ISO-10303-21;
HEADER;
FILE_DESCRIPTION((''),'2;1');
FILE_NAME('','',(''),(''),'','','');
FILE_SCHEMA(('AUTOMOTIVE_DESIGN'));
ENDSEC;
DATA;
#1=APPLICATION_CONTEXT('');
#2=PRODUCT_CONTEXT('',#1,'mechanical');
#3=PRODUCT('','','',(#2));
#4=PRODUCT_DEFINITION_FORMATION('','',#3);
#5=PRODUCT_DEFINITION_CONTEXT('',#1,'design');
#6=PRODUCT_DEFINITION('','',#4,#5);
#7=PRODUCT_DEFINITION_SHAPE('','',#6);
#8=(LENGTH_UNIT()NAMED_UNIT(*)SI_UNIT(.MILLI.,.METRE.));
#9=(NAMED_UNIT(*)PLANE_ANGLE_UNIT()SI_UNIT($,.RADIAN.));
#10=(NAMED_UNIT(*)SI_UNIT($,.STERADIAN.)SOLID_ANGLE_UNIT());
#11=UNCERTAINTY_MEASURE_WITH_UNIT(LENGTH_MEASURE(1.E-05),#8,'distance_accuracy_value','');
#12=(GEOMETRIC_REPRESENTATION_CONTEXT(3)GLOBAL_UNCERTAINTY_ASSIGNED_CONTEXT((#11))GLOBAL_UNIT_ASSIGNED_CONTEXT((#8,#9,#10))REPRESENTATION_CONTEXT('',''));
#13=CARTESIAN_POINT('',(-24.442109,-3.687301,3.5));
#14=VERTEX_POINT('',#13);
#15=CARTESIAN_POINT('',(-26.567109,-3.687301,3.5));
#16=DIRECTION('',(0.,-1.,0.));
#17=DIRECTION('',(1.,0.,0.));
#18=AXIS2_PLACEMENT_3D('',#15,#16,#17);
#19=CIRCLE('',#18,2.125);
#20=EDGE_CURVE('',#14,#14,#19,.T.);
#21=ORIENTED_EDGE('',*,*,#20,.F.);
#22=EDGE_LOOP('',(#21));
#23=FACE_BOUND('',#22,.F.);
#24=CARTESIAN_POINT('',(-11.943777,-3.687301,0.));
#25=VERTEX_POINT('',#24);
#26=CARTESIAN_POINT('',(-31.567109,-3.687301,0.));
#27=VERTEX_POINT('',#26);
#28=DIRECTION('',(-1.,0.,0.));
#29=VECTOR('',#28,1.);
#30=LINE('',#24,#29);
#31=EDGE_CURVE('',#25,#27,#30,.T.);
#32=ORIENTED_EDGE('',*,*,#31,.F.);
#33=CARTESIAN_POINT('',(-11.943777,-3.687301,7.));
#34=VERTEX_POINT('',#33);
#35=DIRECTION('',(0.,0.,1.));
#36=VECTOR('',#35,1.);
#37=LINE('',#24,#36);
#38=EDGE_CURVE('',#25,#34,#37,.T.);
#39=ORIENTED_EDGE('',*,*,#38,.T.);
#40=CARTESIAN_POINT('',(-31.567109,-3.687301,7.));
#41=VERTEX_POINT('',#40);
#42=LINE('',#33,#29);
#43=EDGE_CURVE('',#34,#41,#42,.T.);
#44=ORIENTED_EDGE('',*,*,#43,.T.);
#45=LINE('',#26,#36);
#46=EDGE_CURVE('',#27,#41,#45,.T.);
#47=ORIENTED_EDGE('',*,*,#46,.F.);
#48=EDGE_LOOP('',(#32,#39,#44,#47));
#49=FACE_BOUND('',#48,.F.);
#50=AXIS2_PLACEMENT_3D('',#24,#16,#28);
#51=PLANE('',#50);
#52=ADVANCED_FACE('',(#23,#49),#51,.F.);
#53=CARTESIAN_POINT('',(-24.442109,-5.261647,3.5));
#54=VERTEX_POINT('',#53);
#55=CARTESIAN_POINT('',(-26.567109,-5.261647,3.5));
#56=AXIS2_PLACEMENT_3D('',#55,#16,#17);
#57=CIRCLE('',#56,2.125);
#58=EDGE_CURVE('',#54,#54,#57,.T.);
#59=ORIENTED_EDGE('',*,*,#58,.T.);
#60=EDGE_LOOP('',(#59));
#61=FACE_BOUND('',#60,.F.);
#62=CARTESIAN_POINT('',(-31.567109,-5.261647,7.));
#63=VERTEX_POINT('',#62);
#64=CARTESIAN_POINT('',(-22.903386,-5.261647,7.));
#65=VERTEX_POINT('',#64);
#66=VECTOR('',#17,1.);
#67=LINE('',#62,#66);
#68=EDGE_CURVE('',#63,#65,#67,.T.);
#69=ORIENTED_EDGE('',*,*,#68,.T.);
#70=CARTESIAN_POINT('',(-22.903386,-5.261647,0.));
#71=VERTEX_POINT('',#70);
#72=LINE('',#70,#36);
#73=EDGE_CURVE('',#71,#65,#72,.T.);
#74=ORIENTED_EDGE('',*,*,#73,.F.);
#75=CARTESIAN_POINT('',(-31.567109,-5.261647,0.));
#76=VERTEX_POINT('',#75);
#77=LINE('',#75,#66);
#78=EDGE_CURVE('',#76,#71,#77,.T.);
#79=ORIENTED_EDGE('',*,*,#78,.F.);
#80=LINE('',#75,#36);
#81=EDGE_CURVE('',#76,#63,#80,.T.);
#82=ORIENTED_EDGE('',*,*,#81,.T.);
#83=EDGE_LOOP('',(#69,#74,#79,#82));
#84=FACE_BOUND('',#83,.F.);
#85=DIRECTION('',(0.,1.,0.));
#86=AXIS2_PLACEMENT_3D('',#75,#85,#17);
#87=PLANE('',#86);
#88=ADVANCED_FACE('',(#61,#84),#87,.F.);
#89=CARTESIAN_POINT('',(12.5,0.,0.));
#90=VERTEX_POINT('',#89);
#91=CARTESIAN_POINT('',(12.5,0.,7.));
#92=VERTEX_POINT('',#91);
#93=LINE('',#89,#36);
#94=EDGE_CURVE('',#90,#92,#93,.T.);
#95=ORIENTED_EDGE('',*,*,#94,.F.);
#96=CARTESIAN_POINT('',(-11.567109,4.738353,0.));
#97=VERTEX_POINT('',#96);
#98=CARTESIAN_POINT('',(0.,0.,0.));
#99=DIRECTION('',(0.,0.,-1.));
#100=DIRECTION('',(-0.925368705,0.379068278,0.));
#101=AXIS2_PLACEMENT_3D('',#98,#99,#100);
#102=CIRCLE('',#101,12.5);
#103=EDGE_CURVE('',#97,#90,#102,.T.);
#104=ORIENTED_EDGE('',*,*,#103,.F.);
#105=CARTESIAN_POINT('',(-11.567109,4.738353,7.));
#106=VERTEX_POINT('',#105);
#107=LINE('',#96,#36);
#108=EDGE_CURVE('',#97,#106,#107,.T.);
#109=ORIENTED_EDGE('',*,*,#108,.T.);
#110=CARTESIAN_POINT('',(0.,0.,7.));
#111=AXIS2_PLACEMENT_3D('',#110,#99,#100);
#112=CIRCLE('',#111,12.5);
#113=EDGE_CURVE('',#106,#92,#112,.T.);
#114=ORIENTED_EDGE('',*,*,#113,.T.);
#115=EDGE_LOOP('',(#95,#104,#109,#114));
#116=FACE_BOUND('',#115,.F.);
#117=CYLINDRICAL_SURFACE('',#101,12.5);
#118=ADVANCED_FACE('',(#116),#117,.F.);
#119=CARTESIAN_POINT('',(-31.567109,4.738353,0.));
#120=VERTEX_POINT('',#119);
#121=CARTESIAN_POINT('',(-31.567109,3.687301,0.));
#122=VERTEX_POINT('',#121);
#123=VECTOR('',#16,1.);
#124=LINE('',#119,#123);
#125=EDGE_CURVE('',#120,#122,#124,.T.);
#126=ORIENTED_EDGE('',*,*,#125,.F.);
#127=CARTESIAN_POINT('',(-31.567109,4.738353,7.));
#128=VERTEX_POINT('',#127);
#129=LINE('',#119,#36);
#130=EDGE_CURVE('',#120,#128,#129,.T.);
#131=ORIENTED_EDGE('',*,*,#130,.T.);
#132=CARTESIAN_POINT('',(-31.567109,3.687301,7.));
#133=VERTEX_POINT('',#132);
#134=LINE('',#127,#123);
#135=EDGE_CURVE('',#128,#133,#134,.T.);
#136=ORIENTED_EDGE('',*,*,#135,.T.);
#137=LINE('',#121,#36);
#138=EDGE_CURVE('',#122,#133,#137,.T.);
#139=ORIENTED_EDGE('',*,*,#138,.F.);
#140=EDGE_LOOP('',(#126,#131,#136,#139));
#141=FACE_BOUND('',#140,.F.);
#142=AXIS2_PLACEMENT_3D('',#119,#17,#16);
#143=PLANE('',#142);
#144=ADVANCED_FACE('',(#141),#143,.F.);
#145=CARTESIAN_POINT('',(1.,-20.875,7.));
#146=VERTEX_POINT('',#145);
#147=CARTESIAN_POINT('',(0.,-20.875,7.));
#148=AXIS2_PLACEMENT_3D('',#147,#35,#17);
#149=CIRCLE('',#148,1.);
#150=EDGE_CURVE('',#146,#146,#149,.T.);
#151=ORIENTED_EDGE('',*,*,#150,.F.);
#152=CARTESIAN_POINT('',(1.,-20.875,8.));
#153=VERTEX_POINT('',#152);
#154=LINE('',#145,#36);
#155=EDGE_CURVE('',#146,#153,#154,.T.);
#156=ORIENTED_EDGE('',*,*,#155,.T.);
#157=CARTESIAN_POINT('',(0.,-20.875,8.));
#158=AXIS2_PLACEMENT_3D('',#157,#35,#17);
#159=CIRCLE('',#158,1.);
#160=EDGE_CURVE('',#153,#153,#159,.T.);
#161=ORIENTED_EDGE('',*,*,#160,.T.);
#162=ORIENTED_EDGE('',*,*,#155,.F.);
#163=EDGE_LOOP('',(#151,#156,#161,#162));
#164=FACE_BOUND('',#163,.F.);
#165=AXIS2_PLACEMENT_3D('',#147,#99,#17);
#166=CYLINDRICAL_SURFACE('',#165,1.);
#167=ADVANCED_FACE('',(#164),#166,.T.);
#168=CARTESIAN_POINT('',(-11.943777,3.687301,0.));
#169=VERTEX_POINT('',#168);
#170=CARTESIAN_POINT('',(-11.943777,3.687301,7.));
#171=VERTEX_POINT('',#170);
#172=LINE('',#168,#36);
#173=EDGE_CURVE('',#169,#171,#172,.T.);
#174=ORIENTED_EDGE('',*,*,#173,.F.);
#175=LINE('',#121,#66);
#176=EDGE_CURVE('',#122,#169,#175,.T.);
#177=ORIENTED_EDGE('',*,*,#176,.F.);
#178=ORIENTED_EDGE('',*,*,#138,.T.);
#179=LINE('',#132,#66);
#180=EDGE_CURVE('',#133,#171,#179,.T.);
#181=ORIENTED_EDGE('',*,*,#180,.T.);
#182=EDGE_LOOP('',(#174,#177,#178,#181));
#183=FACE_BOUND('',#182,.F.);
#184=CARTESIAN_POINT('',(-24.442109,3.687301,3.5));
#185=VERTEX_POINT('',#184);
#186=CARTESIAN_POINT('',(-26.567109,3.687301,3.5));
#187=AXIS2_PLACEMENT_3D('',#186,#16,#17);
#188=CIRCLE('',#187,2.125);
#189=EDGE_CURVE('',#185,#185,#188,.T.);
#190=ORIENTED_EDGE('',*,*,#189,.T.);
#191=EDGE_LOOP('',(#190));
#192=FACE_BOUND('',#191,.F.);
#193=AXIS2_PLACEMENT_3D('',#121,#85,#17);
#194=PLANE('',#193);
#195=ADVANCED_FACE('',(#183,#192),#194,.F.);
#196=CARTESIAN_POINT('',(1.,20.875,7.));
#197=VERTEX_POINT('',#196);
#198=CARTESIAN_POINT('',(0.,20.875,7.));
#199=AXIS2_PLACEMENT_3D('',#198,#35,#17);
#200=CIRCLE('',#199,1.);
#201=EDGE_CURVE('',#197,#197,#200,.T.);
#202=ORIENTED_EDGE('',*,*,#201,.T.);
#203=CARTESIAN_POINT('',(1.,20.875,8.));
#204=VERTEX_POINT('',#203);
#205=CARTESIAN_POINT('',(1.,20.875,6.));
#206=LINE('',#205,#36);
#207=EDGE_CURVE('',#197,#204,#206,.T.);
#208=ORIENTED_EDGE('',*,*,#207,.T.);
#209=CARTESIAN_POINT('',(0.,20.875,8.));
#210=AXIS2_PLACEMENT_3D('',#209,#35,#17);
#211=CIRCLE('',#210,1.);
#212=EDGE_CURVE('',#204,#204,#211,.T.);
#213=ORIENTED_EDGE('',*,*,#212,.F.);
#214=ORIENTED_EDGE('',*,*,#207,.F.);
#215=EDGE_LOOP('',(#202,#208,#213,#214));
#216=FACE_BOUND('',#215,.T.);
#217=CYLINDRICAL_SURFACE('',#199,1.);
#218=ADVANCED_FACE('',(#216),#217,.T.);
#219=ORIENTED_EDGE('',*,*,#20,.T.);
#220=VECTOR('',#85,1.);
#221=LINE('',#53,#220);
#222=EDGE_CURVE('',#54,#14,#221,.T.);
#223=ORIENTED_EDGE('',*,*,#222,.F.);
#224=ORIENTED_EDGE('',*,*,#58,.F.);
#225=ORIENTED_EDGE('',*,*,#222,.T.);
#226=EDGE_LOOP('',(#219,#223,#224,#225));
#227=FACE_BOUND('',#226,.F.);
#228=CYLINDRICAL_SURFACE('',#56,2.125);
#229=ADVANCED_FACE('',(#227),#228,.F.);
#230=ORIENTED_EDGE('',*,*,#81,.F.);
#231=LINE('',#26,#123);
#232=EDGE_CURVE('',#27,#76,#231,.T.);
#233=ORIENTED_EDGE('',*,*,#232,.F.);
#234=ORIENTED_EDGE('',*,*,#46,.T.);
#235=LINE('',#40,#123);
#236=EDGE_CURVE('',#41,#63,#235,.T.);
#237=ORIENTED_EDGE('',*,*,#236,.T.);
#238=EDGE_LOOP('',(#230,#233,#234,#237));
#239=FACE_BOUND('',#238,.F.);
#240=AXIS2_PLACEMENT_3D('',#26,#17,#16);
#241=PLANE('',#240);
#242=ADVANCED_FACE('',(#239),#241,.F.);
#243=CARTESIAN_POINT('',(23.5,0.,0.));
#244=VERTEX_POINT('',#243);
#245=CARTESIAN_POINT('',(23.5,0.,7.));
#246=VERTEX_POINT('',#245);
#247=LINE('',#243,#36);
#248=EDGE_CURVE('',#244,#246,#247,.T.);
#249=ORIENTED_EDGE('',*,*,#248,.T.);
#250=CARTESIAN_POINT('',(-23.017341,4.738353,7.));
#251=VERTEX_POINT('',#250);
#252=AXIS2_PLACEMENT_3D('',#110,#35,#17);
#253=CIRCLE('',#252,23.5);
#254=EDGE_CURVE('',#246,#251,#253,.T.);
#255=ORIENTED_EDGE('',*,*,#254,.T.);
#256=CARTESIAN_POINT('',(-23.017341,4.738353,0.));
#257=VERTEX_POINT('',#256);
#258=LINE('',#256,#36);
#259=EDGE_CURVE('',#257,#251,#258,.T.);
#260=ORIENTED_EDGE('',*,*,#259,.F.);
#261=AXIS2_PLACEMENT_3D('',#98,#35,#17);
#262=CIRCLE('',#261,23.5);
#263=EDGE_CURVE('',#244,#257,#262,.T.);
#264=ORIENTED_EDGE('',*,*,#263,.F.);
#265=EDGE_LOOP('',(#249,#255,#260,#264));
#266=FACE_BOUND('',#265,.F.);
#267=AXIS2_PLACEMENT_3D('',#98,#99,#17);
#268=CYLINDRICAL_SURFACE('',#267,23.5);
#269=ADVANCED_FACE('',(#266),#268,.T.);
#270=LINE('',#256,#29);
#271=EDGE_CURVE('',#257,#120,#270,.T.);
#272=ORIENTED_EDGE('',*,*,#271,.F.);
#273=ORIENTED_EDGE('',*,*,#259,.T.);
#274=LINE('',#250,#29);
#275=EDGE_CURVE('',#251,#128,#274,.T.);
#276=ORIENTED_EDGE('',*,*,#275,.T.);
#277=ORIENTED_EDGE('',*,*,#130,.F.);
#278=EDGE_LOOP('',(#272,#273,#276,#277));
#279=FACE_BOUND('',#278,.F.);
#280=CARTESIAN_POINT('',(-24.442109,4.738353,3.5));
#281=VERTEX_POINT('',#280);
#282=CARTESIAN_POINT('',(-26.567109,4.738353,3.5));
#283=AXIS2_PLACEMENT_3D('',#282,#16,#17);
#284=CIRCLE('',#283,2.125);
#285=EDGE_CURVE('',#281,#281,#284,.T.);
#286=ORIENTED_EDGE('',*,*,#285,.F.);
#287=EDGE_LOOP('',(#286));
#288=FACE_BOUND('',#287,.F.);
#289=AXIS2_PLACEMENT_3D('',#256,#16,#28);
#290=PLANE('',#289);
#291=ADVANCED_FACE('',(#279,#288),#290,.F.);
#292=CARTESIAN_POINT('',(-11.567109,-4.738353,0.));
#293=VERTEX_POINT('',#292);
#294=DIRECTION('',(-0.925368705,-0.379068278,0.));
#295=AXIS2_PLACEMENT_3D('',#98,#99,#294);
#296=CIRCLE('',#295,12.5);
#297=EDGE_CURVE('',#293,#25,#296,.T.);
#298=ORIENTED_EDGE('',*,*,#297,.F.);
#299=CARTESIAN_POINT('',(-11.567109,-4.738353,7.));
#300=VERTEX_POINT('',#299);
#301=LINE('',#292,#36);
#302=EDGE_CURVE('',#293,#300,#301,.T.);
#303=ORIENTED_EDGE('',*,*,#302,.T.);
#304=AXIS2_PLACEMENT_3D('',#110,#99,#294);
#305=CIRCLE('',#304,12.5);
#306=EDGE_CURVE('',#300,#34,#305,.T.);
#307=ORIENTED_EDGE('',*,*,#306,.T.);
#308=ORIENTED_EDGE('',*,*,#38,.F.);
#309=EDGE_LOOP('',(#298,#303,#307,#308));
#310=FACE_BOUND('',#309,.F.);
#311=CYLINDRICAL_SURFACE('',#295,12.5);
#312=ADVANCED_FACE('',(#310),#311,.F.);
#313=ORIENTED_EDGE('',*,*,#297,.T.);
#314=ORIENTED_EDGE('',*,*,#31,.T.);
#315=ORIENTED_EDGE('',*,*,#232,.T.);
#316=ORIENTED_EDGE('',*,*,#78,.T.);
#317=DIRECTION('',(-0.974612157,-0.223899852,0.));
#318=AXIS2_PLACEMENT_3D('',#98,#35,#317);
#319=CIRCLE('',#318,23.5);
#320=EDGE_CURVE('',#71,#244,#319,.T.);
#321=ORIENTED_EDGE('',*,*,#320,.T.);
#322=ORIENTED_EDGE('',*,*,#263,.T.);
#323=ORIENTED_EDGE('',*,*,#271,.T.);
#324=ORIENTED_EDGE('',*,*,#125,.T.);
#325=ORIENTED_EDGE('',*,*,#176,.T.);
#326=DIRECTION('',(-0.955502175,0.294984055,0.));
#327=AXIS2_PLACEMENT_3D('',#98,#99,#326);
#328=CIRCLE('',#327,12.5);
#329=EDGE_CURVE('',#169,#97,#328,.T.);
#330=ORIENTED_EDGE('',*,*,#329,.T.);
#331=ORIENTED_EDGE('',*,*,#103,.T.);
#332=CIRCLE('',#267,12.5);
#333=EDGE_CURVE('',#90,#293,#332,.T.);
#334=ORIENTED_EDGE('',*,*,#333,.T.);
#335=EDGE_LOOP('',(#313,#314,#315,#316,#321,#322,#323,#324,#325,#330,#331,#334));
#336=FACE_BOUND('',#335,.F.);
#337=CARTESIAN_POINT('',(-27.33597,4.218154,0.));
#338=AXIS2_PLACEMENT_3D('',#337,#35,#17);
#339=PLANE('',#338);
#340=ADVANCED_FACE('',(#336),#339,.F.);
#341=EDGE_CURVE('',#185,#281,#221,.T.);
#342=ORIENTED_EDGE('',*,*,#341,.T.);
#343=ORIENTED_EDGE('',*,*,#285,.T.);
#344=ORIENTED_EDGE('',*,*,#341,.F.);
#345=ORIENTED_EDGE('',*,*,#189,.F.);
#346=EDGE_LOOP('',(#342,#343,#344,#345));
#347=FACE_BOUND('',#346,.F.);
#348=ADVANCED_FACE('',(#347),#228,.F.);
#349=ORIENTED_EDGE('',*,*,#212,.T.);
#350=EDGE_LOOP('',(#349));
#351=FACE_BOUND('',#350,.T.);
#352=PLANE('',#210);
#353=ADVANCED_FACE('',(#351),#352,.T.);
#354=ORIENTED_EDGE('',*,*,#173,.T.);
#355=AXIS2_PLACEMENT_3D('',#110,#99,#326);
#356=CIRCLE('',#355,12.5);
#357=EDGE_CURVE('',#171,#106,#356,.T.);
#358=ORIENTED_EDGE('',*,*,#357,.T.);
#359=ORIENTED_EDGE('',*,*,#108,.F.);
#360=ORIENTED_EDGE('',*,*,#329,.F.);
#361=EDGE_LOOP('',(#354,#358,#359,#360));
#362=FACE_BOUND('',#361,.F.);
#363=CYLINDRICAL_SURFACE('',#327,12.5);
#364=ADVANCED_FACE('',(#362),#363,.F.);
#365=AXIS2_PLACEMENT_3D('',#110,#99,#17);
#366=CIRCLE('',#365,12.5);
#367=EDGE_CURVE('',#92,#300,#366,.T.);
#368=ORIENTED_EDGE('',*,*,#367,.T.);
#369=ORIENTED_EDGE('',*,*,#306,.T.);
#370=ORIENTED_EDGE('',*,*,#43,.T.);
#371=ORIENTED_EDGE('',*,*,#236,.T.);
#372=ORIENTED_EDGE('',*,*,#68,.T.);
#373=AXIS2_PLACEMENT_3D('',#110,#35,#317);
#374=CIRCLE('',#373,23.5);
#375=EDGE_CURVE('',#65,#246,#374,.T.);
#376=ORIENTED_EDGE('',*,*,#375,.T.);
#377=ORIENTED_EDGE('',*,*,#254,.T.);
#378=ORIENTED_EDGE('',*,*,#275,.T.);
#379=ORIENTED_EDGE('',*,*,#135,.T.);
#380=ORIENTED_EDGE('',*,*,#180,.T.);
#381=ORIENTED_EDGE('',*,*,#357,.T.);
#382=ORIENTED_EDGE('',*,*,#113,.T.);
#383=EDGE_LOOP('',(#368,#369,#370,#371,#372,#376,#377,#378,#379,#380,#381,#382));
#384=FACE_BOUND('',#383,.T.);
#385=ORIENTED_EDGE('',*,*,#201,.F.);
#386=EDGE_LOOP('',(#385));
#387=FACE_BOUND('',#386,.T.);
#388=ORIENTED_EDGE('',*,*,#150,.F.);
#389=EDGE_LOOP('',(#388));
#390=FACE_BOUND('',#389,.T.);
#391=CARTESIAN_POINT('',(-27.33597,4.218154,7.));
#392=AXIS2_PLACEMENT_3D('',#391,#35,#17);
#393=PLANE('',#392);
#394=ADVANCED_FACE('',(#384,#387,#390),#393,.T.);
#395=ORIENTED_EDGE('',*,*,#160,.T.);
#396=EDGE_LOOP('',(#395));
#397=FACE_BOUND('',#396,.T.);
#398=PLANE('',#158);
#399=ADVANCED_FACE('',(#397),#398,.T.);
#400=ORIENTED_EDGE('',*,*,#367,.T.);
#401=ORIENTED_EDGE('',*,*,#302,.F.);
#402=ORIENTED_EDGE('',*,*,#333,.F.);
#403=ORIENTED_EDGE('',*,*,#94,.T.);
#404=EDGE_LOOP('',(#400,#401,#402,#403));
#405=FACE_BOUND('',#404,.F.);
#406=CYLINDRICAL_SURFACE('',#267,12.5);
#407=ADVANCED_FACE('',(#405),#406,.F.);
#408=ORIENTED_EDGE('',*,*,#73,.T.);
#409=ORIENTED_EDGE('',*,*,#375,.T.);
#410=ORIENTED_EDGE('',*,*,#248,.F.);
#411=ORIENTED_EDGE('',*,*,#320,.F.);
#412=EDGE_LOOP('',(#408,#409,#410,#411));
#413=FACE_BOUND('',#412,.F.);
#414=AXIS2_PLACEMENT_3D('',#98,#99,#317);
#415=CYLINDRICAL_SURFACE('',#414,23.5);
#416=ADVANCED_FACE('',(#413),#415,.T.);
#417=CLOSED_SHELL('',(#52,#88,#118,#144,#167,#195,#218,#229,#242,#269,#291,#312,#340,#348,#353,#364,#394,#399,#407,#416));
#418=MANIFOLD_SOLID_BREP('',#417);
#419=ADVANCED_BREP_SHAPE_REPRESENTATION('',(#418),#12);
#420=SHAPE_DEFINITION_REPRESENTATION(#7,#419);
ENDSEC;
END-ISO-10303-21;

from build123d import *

# Parameters (mm, degrees)
F1_DEPTH = 7
F2_R     = 2.125
F3_DEPTH = 10
F4_R     = 1
F5_DEPTH = 1


# Not quite as in the source:
# - a feature names something its author has since deleted; it is built from what else it names


with BuildPart() as f1:
    # F0 (on Top) → F1 (new body)
    with BuildSketch(Plane.XY):
        with BuildLine():
            ThreePointArc((-23.208916684, 3.6873006871), (-23.1191027664, 4.2139159074), (-23.017341427, 4.7383534726))
            Line((-23.017341427, 4.7383534726), (-31.5671088163, 4.7383534726))
            Line((-31.5671088163, 4.7383534726), (-31.5671088163, 3.6873006871))
            Line((-31.5671088163, 3.6873006871), (-23.208916684, 3.6873006871))
        make_face()
        with BuildLine():
            Line((-31.5671088163, -5.2616465274), (-22.9033856847, -5.2616465274))
            ThreePointArc((-22.9033856847, -5.2616465274), (-23.0695849256, -4.4770806738), (-23.208916684, -3.6873006871))
            Line((-23.208916684, -3.6873006871), (-31.5671088163, -3.6873006871))
            Line((-31.5671088163, -3.6873006871), (-31.5671088163, -5.2616465274))
        make_face()
        with BuildLine():
            ThreePointArc((-22.9033856847, -5.2616465274), (2.6476816661, -23.3503700569), (23.5, 0))
            ThreePointArc((23.5, 0), (2.3814361701, 23.3790239695), (-23.017341427, 4.7383534726))
            Line((-23.017341427, 4.7383534726), (-11.5671088163, 4.7383534726))
            ThreePointArc((-11.5671088163, 4.7383534726), (2.4146573045, 12.2645599229), (12.5, 0))
            ThreePointArc((12.5, 0), (2.4146573045, -12.2645599229), (-11.5671088163, -4.7383534726))
            Line((-11.5671088163, -4.7383534726), (-11.5671088163, -5.2616465274))
            Line((-11.5671088163, -5.2616465274), (-22.9033856847, -5.2616465274))
        make_face()
        with BuildLine():
            Line((-11.5671088163, 4.7383534726), (-23.017341427, 4.7383534726))
            ThreePointArc((-23.017341427, 4.7383534726), (-23.1191027664, 4.2139159074), (-23.208916684, 3.6873006871))
            Line((-23.208916684, 3.6873006871), (-11.9437771933, 3.6873006871))
            ThreePointArc((-11.9437771933, 3.6873006871), (-11.7671839549, 4.2170347131), (-11.5671088163, 4.7383534726))
        make_face()
        with BuildLine():
            ThreePointArc((-23.208916684, -3.6873006871), (-23.0695849256, -4.4770806738), (-22.9033856847, -5.2616465274))
            Line((-22.9033856847, -5.2616465274), (-11.5671088163, -5.2616465274))
            Line((-11.5671088163, -5.2616465274), (-11.5671088163, -4.7383534726))
            ThreePointArc((-11.5671088163, -4.7383534726), (-11.7671839549, -4.2170347131), (-11.9437771933, -3.6873006871))
            Line((-11.9437771933, -3.6873006871), (-23.208916684, -3.6873006871))
        make_face()
    extrude(amount=F1_DEPTH)

    # F2 (on face) → F3 (cut)
    with BuildSketch(Plane.XZ.offset(5.2616465274)):
        with Locations((-26.5671088163, 3.5)):
            Circle(F2_R)
    extrude(amount=-F3_DEPTH, mode=Mode.SUBTRACT)

    # F4 (on face) → F5 (join, symmetric)
    with BuildSketch(Plane.XY.offset(7)):
        with Locations((0, -20.875)):
            Circle(F4_R)
        with Locations((0, 20.875)):
            Circle(F4_R)
    extrude(amount=F5_DEPTH, both=True)


solid = f1.part
